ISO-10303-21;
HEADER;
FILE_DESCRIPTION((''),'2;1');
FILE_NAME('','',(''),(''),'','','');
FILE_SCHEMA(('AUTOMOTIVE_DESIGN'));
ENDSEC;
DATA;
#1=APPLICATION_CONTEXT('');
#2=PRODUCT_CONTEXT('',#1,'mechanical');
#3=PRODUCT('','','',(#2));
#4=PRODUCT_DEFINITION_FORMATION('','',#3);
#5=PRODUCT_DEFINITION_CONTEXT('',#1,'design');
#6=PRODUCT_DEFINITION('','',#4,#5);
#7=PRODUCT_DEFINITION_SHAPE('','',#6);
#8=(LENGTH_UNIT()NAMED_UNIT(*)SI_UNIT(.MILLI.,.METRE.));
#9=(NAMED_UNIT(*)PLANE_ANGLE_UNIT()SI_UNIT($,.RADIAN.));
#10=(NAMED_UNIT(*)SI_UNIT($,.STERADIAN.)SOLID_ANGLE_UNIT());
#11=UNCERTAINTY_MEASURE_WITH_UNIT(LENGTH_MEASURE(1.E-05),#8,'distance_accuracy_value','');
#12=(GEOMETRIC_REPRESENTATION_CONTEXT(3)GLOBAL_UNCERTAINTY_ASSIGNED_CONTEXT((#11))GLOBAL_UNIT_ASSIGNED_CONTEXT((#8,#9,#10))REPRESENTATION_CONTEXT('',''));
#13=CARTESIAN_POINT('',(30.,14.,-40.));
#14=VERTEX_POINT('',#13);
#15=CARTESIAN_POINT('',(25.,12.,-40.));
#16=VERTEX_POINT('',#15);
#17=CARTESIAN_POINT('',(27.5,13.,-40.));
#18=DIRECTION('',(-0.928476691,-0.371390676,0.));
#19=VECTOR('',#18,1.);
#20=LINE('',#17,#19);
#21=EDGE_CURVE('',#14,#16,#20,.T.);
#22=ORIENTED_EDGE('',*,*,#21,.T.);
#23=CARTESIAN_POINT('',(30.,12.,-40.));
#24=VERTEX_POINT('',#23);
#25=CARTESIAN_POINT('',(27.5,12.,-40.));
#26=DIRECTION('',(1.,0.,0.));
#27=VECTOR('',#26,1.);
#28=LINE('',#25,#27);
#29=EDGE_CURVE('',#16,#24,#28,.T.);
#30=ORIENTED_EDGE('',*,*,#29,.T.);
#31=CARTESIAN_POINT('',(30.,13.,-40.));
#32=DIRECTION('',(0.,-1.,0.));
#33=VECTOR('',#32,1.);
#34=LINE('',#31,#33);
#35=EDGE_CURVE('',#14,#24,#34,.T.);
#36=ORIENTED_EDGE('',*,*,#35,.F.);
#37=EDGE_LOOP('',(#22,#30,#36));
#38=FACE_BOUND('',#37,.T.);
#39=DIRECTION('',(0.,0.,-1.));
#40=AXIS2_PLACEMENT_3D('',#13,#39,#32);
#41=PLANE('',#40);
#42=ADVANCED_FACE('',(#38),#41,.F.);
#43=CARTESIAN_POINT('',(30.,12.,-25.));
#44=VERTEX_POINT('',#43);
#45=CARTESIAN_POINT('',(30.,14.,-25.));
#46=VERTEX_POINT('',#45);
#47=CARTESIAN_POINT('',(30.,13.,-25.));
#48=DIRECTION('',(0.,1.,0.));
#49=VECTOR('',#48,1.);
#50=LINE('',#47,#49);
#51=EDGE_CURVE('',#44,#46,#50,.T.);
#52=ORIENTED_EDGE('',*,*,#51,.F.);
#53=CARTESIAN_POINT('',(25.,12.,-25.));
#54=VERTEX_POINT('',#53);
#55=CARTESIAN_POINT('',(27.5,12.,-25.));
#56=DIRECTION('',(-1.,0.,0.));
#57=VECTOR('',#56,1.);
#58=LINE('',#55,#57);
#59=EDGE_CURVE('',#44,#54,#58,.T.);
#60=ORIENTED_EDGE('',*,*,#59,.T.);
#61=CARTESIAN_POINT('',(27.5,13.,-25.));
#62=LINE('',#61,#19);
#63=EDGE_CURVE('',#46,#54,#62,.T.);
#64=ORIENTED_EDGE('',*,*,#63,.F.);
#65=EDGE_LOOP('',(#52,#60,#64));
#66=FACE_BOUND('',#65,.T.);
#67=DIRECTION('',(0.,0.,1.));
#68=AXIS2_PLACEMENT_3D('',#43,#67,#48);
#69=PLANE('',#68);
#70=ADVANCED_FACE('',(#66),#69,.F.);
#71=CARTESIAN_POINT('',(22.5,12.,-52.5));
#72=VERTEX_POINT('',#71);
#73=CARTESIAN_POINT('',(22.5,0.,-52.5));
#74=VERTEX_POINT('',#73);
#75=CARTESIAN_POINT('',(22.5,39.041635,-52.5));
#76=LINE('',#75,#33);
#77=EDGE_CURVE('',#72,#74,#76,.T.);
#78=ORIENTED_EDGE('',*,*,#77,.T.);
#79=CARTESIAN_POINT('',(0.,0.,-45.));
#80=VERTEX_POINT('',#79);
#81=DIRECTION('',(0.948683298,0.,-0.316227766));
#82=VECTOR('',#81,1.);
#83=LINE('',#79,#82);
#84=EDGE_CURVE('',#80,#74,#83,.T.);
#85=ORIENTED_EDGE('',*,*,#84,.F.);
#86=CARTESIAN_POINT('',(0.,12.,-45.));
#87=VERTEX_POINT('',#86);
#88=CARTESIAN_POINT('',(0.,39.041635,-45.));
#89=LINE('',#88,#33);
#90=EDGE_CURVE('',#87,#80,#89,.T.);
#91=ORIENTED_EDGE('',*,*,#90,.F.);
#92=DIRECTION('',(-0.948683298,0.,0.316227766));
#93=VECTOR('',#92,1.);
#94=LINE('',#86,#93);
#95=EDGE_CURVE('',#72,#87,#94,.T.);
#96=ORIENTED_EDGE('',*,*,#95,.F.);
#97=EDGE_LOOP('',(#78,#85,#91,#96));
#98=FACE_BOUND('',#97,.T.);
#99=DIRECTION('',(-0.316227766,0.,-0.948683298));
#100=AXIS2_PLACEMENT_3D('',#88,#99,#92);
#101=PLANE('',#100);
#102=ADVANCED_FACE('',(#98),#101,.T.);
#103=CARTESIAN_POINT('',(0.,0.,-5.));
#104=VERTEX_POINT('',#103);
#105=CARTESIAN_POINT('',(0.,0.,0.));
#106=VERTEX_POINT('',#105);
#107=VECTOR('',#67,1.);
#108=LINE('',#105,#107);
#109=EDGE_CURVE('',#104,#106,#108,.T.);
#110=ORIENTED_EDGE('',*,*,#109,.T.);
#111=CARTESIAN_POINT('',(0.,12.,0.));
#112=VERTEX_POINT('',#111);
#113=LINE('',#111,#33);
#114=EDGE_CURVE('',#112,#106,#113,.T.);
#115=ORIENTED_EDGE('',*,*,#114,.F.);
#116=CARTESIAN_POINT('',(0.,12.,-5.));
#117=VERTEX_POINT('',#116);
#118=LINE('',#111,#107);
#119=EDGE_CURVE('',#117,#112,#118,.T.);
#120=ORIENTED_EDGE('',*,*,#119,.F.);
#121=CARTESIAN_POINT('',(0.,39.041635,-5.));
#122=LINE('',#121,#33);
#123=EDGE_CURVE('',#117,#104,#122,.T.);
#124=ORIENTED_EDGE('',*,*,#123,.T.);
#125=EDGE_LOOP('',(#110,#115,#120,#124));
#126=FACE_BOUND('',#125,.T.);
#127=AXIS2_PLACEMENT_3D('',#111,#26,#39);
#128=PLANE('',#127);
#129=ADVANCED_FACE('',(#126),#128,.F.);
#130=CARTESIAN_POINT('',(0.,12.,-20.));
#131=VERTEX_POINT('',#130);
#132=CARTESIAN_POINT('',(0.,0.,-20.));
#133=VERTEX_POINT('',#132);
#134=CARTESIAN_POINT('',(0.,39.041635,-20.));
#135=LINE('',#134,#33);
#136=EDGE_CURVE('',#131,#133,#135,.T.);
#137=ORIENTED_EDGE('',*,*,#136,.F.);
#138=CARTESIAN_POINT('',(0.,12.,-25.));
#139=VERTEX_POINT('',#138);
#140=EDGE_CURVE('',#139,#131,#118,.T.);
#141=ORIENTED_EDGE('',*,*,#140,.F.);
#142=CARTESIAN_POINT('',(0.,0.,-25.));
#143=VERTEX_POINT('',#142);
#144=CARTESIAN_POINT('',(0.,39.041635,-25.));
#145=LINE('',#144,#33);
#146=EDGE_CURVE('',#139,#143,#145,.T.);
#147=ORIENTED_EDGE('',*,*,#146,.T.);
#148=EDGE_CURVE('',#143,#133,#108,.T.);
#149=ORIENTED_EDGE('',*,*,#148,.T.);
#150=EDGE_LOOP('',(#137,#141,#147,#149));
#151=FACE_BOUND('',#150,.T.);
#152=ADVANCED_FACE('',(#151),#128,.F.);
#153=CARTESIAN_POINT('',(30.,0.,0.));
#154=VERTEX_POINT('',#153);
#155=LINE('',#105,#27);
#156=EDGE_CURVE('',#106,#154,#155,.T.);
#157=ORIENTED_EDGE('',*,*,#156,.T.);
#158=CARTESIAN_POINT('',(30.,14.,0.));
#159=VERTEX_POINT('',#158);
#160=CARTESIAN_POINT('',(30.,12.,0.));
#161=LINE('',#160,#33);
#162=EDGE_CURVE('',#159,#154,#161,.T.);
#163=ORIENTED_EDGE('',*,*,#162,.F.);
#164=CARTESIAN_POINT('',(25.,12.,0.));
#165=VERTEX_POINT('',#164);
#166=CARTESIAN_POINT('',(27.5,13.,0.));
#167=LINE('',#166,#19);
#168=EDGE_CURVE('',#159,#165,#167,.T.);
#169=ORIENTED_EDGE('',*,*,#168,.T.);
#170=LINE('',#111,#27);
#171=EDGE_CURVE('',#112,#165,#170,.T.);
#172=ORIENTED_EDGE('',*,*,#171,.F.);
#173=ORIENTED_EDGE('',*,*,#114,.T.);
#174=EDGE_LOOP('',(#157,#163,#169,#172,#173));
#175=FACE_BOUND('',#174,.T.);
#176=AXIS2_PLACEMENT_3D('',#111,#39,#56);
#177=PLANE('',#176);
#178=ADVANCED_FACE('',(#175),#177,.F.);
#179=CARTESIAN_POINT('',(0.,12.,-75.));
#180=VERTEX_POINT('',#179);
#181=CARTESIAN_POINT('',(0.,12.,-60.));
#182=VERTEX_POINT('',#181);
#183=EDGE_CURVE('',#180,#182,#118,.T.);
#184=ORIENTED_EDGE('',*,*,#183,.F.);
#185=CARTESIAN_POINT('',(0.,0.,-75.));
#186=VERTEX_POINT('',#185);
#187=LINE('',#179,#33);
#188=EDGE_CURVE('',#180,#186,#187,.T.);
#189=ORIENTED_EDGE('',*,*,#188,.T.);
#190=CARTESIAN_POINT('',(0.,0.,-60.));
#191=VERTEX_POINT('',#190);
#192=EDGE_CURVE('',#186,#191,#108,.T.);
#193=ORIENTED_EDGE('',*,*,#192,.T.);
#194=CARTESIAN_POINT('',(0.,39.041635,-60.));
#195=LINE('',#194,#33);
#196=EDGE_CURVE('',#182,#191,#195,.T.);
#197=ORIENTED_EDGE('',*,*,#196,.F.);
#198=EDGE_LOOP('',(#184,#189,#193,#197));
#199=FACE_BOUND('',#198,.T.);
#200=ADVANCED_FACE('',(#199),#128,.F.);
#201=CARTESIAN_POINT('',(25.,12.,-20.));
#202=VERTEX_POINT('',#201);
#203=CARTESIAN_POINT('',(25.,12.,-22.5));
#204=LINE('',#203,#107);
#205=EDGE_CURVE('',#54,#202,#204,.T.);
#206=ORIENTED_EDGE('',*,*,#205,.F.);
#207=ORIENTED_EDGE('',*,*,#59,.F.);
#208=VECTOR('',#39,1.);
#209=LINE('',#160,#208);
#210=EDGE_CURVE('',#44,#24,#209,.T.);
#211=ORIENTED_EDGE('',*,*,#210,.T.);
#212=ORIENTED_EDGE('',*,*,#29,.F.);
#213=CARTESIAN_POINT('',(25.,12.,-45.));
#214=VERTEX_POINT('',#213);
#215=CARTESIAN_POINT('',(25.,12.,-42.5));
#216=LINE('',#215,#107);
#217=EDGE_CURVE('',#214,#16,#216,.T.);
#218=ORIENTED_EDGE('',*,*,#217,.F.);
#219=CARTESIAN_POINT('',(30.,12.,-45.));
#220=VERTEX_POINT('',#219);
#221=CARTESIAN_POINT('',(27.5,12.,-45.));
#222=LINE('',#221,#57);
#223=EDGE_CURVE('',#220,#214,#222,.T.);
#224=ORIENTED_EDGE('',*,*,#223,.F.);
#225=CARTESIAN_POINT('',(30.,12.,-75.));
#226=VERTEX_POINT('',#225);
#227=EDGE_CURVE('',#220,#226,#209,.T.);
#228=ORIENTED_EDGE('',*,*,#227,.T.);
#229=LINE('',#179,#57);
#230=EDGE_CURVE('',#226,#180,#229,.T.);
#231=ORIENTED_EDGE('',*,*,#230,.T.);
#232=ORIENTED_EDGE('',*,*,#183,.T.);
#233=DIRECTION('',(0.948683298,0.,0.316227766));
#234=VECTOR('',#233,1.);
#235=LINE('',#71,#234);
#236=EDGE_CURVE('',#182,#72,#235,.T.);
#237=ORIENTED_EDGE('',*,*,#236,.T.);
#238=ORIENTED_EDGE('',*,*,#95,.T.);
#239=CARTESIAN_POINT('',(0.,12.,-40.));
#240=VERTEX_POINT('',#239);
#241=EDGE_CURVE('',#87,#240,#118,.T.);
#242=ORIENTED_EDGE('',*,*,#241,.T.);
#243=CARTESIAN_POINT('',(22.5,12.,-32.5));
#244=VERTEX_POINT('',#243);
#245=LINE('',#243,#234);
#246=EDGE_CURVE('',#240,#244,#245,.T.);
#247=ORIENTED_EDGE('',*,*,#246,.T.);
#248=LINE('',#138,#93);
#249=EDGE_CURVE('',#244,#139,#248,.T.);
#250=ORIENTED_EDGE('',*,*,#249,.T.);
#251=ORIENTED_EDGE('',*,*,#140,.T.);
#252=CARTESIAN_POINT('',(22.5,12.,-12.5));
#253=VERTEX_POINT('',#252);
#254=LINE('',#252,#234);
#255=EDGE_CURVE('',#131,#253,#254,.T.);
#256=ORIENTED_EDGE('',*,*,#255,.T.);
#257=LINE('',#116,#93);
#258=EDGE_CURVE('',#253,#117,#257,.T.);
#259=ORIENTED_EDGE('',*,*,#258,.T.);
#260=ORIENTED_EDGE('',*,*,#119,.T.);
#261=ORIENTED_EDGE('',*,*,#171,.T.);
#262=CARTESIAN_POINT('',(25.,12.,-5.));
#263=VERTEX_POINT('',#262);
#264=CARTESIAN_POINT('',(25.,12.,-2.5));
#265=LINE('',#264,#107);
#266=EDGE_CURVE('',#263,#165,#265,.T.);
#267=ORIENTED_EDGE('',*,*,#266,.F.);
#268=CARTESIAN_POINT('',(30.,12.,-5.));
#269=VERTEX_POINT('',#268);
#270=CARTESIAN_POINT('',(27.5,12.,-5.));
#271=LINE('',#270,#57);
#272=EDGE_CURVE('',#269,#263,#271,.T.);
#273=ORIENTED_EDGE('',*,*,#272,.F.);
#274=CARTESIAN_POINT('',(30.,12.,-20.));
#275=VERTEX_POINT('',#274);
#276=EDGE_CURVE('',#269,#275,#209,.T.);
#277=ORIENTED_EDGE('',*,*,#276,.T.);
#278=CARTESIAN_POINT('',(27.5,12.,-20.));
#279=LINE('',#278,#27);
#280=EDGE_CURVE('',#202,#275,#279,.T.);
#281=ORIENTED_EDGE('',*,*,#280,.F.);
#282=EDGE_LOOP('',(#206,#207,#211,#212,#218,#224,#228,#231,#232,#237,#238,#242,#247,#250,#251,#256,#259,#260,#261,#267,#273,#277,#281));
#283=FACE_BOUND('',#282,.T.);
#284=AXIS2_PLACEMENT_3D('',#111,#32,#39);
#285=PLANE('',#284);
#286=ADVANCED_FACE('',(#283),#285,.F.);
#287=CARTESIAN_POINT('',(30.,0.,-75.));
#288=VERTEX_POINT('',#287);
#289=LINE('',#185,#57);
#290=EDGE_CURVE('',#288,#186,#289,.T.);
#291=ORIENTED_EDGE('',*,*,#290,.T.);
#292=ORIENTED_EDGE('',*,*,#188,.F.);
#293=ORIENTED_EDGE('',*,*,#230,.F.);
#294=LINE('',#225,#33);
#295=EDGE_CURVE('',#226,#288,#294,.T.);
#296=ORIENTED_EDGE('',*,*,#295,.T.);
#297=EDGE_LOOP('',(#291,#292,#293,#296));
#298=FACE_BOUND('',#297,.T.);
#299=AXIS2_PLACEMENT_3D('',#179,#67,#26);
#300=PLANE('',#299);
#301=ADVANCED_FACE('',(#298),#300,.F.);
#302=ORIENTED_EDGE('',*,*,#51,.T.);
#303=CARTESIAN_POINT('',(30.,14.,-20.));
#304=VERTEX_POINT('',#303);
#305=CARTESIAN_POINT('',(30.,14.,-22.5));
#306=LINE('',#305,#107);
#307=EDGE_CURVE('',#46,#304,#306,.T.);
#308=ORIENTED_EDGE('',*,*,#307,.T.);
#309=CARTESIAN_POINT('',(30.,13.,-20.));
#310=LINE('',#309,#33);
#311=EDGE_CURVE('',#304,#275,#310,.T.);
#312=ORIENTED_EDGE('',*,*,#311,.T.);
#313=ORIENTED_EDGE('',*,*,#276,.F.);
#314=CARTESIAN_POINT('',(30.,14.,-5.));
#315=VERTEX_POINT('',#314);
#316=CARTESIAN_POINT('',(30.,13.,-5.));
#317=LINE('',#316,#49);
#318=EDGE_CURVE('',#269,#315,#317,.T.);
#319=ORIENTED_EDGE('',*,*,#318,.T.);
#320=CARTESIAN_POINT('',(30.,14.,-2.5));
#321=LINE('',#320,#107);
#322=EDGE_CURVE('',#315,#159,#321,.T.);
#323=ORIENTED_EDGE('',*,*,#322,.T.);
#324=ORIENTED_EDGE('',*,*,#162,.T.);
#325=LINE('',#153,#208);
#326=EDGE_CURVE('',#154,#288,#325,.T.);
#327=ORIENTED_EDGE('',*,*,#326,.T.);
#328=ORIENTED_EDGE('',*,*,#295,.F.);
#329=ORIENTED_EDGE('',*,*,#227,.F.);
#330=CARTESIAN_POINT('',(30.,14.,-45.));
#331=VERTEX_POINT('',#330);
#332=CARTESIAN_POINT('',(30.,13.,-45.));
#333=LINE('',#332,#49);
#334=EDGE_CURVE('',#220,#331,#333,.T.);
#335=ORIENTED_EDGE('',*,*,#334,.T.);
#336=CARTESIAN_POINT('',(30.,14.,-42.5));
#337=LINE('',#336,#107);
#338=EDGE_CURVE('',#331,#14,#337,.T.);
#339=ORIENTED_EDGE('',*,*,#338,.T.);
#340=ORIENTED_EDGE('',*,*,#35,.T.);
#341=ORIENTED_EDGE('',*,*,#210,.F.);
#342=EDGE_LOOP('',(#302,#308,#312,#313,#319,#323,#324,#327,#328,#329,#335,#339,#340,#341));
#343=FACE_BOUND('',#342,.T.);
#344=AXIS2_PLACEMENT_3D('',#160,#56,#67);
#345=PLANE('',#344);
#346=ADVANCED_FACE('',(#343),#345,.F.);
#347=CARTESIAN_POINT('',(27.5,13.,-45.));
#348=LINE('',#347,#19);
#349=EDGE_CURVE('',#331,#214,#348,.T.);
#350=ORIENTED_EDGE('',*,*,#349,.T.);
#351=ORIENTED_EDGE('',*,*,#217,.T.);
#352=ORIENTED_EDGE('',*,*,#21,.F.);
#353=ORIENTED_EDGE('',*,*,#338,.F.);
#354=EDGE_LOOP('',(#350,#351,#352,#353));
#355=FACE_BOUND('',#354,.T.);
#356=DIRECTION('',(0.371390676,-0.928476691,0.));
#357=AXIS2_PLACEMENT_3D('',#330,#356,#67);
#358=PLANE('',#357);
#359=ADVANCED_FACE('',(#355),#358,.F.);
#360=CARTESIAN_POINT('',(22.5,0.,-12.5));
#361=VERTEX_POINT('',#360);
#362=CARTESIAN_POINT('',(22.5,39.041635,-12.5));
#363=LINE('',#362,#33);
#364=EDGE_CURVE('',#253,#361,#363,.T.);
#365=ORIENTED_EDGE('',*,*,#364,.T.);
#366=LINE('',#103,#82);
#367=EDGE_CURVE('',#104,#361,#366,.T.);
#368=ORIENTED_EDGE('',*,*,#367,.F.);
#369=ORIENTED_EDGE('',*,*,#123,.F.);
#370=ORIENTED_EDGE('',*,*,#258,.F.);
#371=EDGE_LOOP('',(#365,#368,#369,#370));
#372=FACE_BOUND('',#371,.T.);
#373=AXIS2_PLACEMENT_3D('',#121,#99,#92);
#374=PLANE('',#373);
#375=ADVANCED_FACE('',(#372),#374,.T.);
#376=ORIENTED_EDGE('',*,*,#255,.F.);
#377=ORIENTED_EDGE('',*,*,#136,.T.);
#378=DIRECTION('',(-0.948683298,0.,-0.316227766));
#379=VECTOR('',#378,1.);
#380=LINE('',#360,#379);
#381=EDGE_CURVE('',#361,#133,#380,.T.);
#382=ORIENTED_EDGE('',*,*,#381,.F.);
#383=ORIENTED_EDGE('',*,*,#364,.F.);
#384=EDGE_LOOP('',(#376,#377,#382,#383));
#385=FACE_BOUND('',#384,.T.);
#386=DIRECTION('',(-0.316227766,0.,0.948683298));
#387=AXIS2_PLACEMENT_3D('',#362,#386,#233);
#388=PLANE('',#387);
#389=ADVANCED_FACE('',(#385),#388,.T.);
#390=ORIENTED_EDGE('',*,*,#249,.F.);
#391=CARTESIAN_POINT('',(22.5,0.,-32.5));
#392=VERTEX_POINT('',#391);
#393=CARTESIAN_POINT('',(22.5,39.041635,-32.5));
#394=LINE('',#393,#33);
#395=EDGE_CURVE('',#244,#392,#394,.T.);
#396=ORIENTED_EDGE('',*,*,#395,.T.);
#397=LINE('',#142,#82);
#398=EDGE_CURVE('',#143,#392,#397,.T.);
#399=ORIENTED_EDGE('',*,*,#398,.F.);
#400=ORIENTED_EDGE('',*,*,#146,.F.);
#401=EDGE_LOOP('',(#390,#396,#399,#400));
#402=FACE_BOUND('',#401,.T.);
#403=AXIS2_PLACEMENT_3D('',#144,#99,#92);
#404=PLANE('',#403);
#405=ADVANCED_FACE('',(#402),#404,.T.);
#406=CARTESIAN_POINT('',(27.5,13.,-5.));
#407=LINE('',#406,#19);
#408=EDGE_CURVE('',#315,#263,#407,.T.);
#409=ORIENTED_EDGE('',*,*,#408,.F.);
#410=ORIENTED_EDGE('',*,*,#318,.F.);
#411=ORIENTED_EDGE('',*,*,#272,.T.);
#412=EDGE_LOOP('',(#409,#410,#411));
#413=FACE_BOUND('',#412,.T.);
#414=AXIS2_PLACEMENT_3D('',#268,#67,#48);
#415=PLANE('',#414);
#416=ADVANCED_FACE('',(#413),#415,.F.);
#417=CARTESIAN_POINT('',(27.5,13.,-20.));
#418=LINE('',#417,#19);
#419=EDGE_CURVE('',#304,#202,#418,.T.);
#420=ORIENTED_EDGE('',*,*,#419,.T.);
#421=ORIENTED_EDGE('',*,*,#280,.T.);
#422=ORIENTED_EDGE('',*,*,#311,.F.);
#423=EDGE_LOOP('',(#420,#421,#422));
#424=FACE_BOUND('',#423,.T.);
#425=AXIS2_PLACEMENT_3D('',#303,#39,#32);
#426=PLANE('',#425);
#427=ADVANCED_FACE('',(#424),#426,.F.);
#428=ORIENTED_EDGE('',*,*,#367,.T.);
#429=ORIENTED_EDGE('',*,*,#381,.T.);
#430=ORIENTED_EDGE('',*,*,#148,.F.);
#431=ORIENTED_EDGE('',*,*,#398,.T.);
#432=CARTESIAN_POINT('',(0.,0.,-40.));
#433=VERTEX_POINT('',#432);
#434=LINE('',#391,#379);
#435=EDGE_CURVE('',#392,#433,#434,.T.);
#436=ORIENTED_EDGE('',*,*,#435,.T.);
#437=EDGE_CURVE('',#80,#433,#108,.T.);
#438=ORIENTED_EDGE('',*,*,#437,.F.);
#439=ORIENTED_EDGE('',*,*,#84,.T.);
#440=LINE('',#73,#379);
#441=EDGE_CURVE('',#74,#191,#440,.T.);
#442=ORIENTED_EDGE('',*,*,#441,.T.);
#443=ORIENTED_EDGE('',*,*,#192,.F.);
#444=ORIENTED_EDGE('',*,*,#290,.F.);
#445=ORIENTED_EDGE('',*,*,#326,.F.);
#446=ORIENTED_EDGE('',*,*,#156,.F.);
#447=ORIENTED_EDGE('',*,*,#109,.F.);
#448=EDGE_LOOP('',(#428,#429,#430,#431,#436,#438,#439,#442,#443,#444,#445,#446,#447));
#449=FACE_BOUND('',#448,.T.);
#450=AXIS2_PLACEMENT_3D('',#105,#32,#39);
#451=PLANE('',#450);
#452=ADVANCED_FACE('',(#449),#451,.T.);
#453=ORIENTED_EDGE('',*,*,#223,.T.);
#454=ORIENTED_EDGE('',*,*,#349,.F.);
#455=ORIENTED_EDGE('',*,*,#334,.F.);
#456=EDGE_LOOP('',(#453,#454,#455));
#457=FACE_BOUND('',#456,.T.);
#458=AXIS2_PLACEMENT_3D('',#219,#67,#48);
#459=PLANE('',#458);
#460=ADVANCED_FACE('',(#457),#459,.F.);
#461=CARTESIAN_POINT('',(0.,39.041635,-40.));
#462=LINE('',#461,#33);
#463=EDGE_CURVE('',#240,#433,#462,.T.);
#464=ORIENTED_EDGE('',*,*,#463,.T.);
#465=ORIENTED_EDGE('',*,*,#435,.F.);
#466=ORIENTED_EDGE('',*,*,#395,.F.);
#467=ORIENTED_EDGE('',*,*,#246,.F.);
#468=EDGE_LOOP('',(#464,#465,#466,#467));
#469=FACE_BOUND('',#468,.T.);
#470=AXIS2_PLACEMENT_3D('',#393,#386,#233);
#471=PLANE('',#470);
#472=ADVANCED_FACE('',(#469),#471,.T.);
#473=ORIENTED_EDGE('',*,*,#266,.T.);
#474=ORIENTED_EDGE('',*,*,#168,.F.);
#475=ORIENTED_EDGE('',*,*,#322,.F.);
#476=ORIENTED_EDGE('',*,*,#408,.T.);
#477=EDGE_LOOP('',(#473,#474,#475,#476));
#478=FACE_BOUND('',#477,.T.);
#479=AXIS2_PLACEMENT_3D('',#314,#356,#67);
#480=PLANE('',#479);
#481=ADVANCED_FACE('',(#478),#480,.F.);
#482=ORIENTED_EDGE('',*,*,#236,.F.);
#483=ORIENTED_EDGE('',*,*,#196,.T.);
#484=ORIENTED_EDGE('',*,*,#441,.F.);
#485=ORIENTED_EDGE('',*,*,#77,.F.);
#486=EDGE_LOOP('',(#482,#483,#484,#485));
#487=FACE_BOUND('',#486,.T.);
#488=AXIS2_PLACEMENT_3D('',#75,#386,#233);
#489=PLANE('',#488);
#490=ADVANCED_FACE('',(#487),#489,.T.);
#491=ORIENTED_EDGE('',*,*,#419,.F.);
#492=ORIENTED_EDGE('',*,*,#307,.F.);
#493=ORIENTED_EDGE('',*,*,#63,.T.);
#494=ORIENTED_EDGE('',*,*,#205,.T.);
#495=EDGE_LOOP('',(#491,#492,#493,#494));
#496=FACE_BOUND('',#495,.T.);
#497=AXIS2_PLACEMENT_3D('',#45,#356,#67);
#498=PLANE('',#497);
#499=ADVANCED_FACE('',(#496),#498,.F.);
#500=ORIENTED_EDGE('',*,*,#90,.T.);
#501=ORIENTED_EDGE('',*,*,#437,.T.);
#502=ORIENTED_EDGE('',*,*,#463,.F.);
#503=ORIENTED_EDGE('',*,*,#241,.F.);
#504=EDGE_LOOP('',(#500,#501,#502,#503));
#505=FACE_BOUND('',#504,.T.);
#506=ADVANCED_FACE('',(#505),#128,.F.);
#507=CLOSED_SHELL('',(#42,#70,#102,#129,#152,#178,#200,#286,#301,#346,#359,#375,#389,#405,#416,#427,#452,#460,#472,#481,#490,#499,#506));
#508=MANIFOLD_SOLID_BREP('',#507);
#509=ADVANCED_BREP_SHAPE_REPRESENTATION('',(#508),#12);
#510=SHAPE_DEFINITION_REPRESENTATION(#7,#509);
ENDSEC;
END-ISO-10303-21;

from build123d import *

# Parameters (mm, degrees)
SKETCH1_W           = 30
SKETCH1_H           = 75
BOSS_EXTRUDE1_DEPTH = 12
CUT_EXTRUDE1_DEPTH  = 12
LPATTERN1_COUNT     = 3
LPATTERN1_PITCH     = 20
BOUNDARY1_START     = -45
BOUNDARY1_DEPTH     = 5
LPATTERN2_COUNT     = 3
LPATTERN2_PITCH     = 20


# Read off the part's stored shape, not the designer's step: Boundary1
with BuildPart() as part:
    # Sketch1 → Boss-Extrude1 (new body)
    with BuildSketch(Plane(origin=(0, 0, 0), x_dir=(1, 0, 0), z_dir=(0, 1, 0))):
        with Locations((15, 37.5)):
            Rectangle(SKETCH1_W, SKETCH1_H)
    extrude(amount=BOSS_EXTRUDE1_DEPTH)

    # Sketch3 → Cut-Extrude1 (cut)
    with BuildSketch(Plane(origin=(0, 0, 0), x_dir=(1, 0, 0), z_dir=(0, 1, 0))):
        Polygon((0, 5), (22.5, 12.5), (0, 20), align=None)
    cut_extrude1 = extrude(amount=CUT_EXTRUDE1_DEPTH, mode=Mode.SUBTRACT)

    # LPattern1: Cut-Extrude1 ×3
    with Locations(*[(0, 0, -i * LPATTERN1_PITCH) for i in range(1, LPATTERN1_COUNT)]):
        add(cut_extrude1, mode=Mode.SUBTRACT)

    # Boundary1 outline → Boundary1 (add)
    with BuildSketch(Plane.XY.offset(BOUNDARY1_START)):
        Polygon((30, 14), (25, 12), (30, 12), align=None)
    boundary1 = extrude(amount=BOUNDARY1_DEPTH)

    # LPattern2: Boundary1 ×3
    with Locations(*[(0, 0, i * LPATTERN2_PITCH) for i in range(1, LPATTERN2_COUNT)]):
        add(boundary1)


solid = part.part
